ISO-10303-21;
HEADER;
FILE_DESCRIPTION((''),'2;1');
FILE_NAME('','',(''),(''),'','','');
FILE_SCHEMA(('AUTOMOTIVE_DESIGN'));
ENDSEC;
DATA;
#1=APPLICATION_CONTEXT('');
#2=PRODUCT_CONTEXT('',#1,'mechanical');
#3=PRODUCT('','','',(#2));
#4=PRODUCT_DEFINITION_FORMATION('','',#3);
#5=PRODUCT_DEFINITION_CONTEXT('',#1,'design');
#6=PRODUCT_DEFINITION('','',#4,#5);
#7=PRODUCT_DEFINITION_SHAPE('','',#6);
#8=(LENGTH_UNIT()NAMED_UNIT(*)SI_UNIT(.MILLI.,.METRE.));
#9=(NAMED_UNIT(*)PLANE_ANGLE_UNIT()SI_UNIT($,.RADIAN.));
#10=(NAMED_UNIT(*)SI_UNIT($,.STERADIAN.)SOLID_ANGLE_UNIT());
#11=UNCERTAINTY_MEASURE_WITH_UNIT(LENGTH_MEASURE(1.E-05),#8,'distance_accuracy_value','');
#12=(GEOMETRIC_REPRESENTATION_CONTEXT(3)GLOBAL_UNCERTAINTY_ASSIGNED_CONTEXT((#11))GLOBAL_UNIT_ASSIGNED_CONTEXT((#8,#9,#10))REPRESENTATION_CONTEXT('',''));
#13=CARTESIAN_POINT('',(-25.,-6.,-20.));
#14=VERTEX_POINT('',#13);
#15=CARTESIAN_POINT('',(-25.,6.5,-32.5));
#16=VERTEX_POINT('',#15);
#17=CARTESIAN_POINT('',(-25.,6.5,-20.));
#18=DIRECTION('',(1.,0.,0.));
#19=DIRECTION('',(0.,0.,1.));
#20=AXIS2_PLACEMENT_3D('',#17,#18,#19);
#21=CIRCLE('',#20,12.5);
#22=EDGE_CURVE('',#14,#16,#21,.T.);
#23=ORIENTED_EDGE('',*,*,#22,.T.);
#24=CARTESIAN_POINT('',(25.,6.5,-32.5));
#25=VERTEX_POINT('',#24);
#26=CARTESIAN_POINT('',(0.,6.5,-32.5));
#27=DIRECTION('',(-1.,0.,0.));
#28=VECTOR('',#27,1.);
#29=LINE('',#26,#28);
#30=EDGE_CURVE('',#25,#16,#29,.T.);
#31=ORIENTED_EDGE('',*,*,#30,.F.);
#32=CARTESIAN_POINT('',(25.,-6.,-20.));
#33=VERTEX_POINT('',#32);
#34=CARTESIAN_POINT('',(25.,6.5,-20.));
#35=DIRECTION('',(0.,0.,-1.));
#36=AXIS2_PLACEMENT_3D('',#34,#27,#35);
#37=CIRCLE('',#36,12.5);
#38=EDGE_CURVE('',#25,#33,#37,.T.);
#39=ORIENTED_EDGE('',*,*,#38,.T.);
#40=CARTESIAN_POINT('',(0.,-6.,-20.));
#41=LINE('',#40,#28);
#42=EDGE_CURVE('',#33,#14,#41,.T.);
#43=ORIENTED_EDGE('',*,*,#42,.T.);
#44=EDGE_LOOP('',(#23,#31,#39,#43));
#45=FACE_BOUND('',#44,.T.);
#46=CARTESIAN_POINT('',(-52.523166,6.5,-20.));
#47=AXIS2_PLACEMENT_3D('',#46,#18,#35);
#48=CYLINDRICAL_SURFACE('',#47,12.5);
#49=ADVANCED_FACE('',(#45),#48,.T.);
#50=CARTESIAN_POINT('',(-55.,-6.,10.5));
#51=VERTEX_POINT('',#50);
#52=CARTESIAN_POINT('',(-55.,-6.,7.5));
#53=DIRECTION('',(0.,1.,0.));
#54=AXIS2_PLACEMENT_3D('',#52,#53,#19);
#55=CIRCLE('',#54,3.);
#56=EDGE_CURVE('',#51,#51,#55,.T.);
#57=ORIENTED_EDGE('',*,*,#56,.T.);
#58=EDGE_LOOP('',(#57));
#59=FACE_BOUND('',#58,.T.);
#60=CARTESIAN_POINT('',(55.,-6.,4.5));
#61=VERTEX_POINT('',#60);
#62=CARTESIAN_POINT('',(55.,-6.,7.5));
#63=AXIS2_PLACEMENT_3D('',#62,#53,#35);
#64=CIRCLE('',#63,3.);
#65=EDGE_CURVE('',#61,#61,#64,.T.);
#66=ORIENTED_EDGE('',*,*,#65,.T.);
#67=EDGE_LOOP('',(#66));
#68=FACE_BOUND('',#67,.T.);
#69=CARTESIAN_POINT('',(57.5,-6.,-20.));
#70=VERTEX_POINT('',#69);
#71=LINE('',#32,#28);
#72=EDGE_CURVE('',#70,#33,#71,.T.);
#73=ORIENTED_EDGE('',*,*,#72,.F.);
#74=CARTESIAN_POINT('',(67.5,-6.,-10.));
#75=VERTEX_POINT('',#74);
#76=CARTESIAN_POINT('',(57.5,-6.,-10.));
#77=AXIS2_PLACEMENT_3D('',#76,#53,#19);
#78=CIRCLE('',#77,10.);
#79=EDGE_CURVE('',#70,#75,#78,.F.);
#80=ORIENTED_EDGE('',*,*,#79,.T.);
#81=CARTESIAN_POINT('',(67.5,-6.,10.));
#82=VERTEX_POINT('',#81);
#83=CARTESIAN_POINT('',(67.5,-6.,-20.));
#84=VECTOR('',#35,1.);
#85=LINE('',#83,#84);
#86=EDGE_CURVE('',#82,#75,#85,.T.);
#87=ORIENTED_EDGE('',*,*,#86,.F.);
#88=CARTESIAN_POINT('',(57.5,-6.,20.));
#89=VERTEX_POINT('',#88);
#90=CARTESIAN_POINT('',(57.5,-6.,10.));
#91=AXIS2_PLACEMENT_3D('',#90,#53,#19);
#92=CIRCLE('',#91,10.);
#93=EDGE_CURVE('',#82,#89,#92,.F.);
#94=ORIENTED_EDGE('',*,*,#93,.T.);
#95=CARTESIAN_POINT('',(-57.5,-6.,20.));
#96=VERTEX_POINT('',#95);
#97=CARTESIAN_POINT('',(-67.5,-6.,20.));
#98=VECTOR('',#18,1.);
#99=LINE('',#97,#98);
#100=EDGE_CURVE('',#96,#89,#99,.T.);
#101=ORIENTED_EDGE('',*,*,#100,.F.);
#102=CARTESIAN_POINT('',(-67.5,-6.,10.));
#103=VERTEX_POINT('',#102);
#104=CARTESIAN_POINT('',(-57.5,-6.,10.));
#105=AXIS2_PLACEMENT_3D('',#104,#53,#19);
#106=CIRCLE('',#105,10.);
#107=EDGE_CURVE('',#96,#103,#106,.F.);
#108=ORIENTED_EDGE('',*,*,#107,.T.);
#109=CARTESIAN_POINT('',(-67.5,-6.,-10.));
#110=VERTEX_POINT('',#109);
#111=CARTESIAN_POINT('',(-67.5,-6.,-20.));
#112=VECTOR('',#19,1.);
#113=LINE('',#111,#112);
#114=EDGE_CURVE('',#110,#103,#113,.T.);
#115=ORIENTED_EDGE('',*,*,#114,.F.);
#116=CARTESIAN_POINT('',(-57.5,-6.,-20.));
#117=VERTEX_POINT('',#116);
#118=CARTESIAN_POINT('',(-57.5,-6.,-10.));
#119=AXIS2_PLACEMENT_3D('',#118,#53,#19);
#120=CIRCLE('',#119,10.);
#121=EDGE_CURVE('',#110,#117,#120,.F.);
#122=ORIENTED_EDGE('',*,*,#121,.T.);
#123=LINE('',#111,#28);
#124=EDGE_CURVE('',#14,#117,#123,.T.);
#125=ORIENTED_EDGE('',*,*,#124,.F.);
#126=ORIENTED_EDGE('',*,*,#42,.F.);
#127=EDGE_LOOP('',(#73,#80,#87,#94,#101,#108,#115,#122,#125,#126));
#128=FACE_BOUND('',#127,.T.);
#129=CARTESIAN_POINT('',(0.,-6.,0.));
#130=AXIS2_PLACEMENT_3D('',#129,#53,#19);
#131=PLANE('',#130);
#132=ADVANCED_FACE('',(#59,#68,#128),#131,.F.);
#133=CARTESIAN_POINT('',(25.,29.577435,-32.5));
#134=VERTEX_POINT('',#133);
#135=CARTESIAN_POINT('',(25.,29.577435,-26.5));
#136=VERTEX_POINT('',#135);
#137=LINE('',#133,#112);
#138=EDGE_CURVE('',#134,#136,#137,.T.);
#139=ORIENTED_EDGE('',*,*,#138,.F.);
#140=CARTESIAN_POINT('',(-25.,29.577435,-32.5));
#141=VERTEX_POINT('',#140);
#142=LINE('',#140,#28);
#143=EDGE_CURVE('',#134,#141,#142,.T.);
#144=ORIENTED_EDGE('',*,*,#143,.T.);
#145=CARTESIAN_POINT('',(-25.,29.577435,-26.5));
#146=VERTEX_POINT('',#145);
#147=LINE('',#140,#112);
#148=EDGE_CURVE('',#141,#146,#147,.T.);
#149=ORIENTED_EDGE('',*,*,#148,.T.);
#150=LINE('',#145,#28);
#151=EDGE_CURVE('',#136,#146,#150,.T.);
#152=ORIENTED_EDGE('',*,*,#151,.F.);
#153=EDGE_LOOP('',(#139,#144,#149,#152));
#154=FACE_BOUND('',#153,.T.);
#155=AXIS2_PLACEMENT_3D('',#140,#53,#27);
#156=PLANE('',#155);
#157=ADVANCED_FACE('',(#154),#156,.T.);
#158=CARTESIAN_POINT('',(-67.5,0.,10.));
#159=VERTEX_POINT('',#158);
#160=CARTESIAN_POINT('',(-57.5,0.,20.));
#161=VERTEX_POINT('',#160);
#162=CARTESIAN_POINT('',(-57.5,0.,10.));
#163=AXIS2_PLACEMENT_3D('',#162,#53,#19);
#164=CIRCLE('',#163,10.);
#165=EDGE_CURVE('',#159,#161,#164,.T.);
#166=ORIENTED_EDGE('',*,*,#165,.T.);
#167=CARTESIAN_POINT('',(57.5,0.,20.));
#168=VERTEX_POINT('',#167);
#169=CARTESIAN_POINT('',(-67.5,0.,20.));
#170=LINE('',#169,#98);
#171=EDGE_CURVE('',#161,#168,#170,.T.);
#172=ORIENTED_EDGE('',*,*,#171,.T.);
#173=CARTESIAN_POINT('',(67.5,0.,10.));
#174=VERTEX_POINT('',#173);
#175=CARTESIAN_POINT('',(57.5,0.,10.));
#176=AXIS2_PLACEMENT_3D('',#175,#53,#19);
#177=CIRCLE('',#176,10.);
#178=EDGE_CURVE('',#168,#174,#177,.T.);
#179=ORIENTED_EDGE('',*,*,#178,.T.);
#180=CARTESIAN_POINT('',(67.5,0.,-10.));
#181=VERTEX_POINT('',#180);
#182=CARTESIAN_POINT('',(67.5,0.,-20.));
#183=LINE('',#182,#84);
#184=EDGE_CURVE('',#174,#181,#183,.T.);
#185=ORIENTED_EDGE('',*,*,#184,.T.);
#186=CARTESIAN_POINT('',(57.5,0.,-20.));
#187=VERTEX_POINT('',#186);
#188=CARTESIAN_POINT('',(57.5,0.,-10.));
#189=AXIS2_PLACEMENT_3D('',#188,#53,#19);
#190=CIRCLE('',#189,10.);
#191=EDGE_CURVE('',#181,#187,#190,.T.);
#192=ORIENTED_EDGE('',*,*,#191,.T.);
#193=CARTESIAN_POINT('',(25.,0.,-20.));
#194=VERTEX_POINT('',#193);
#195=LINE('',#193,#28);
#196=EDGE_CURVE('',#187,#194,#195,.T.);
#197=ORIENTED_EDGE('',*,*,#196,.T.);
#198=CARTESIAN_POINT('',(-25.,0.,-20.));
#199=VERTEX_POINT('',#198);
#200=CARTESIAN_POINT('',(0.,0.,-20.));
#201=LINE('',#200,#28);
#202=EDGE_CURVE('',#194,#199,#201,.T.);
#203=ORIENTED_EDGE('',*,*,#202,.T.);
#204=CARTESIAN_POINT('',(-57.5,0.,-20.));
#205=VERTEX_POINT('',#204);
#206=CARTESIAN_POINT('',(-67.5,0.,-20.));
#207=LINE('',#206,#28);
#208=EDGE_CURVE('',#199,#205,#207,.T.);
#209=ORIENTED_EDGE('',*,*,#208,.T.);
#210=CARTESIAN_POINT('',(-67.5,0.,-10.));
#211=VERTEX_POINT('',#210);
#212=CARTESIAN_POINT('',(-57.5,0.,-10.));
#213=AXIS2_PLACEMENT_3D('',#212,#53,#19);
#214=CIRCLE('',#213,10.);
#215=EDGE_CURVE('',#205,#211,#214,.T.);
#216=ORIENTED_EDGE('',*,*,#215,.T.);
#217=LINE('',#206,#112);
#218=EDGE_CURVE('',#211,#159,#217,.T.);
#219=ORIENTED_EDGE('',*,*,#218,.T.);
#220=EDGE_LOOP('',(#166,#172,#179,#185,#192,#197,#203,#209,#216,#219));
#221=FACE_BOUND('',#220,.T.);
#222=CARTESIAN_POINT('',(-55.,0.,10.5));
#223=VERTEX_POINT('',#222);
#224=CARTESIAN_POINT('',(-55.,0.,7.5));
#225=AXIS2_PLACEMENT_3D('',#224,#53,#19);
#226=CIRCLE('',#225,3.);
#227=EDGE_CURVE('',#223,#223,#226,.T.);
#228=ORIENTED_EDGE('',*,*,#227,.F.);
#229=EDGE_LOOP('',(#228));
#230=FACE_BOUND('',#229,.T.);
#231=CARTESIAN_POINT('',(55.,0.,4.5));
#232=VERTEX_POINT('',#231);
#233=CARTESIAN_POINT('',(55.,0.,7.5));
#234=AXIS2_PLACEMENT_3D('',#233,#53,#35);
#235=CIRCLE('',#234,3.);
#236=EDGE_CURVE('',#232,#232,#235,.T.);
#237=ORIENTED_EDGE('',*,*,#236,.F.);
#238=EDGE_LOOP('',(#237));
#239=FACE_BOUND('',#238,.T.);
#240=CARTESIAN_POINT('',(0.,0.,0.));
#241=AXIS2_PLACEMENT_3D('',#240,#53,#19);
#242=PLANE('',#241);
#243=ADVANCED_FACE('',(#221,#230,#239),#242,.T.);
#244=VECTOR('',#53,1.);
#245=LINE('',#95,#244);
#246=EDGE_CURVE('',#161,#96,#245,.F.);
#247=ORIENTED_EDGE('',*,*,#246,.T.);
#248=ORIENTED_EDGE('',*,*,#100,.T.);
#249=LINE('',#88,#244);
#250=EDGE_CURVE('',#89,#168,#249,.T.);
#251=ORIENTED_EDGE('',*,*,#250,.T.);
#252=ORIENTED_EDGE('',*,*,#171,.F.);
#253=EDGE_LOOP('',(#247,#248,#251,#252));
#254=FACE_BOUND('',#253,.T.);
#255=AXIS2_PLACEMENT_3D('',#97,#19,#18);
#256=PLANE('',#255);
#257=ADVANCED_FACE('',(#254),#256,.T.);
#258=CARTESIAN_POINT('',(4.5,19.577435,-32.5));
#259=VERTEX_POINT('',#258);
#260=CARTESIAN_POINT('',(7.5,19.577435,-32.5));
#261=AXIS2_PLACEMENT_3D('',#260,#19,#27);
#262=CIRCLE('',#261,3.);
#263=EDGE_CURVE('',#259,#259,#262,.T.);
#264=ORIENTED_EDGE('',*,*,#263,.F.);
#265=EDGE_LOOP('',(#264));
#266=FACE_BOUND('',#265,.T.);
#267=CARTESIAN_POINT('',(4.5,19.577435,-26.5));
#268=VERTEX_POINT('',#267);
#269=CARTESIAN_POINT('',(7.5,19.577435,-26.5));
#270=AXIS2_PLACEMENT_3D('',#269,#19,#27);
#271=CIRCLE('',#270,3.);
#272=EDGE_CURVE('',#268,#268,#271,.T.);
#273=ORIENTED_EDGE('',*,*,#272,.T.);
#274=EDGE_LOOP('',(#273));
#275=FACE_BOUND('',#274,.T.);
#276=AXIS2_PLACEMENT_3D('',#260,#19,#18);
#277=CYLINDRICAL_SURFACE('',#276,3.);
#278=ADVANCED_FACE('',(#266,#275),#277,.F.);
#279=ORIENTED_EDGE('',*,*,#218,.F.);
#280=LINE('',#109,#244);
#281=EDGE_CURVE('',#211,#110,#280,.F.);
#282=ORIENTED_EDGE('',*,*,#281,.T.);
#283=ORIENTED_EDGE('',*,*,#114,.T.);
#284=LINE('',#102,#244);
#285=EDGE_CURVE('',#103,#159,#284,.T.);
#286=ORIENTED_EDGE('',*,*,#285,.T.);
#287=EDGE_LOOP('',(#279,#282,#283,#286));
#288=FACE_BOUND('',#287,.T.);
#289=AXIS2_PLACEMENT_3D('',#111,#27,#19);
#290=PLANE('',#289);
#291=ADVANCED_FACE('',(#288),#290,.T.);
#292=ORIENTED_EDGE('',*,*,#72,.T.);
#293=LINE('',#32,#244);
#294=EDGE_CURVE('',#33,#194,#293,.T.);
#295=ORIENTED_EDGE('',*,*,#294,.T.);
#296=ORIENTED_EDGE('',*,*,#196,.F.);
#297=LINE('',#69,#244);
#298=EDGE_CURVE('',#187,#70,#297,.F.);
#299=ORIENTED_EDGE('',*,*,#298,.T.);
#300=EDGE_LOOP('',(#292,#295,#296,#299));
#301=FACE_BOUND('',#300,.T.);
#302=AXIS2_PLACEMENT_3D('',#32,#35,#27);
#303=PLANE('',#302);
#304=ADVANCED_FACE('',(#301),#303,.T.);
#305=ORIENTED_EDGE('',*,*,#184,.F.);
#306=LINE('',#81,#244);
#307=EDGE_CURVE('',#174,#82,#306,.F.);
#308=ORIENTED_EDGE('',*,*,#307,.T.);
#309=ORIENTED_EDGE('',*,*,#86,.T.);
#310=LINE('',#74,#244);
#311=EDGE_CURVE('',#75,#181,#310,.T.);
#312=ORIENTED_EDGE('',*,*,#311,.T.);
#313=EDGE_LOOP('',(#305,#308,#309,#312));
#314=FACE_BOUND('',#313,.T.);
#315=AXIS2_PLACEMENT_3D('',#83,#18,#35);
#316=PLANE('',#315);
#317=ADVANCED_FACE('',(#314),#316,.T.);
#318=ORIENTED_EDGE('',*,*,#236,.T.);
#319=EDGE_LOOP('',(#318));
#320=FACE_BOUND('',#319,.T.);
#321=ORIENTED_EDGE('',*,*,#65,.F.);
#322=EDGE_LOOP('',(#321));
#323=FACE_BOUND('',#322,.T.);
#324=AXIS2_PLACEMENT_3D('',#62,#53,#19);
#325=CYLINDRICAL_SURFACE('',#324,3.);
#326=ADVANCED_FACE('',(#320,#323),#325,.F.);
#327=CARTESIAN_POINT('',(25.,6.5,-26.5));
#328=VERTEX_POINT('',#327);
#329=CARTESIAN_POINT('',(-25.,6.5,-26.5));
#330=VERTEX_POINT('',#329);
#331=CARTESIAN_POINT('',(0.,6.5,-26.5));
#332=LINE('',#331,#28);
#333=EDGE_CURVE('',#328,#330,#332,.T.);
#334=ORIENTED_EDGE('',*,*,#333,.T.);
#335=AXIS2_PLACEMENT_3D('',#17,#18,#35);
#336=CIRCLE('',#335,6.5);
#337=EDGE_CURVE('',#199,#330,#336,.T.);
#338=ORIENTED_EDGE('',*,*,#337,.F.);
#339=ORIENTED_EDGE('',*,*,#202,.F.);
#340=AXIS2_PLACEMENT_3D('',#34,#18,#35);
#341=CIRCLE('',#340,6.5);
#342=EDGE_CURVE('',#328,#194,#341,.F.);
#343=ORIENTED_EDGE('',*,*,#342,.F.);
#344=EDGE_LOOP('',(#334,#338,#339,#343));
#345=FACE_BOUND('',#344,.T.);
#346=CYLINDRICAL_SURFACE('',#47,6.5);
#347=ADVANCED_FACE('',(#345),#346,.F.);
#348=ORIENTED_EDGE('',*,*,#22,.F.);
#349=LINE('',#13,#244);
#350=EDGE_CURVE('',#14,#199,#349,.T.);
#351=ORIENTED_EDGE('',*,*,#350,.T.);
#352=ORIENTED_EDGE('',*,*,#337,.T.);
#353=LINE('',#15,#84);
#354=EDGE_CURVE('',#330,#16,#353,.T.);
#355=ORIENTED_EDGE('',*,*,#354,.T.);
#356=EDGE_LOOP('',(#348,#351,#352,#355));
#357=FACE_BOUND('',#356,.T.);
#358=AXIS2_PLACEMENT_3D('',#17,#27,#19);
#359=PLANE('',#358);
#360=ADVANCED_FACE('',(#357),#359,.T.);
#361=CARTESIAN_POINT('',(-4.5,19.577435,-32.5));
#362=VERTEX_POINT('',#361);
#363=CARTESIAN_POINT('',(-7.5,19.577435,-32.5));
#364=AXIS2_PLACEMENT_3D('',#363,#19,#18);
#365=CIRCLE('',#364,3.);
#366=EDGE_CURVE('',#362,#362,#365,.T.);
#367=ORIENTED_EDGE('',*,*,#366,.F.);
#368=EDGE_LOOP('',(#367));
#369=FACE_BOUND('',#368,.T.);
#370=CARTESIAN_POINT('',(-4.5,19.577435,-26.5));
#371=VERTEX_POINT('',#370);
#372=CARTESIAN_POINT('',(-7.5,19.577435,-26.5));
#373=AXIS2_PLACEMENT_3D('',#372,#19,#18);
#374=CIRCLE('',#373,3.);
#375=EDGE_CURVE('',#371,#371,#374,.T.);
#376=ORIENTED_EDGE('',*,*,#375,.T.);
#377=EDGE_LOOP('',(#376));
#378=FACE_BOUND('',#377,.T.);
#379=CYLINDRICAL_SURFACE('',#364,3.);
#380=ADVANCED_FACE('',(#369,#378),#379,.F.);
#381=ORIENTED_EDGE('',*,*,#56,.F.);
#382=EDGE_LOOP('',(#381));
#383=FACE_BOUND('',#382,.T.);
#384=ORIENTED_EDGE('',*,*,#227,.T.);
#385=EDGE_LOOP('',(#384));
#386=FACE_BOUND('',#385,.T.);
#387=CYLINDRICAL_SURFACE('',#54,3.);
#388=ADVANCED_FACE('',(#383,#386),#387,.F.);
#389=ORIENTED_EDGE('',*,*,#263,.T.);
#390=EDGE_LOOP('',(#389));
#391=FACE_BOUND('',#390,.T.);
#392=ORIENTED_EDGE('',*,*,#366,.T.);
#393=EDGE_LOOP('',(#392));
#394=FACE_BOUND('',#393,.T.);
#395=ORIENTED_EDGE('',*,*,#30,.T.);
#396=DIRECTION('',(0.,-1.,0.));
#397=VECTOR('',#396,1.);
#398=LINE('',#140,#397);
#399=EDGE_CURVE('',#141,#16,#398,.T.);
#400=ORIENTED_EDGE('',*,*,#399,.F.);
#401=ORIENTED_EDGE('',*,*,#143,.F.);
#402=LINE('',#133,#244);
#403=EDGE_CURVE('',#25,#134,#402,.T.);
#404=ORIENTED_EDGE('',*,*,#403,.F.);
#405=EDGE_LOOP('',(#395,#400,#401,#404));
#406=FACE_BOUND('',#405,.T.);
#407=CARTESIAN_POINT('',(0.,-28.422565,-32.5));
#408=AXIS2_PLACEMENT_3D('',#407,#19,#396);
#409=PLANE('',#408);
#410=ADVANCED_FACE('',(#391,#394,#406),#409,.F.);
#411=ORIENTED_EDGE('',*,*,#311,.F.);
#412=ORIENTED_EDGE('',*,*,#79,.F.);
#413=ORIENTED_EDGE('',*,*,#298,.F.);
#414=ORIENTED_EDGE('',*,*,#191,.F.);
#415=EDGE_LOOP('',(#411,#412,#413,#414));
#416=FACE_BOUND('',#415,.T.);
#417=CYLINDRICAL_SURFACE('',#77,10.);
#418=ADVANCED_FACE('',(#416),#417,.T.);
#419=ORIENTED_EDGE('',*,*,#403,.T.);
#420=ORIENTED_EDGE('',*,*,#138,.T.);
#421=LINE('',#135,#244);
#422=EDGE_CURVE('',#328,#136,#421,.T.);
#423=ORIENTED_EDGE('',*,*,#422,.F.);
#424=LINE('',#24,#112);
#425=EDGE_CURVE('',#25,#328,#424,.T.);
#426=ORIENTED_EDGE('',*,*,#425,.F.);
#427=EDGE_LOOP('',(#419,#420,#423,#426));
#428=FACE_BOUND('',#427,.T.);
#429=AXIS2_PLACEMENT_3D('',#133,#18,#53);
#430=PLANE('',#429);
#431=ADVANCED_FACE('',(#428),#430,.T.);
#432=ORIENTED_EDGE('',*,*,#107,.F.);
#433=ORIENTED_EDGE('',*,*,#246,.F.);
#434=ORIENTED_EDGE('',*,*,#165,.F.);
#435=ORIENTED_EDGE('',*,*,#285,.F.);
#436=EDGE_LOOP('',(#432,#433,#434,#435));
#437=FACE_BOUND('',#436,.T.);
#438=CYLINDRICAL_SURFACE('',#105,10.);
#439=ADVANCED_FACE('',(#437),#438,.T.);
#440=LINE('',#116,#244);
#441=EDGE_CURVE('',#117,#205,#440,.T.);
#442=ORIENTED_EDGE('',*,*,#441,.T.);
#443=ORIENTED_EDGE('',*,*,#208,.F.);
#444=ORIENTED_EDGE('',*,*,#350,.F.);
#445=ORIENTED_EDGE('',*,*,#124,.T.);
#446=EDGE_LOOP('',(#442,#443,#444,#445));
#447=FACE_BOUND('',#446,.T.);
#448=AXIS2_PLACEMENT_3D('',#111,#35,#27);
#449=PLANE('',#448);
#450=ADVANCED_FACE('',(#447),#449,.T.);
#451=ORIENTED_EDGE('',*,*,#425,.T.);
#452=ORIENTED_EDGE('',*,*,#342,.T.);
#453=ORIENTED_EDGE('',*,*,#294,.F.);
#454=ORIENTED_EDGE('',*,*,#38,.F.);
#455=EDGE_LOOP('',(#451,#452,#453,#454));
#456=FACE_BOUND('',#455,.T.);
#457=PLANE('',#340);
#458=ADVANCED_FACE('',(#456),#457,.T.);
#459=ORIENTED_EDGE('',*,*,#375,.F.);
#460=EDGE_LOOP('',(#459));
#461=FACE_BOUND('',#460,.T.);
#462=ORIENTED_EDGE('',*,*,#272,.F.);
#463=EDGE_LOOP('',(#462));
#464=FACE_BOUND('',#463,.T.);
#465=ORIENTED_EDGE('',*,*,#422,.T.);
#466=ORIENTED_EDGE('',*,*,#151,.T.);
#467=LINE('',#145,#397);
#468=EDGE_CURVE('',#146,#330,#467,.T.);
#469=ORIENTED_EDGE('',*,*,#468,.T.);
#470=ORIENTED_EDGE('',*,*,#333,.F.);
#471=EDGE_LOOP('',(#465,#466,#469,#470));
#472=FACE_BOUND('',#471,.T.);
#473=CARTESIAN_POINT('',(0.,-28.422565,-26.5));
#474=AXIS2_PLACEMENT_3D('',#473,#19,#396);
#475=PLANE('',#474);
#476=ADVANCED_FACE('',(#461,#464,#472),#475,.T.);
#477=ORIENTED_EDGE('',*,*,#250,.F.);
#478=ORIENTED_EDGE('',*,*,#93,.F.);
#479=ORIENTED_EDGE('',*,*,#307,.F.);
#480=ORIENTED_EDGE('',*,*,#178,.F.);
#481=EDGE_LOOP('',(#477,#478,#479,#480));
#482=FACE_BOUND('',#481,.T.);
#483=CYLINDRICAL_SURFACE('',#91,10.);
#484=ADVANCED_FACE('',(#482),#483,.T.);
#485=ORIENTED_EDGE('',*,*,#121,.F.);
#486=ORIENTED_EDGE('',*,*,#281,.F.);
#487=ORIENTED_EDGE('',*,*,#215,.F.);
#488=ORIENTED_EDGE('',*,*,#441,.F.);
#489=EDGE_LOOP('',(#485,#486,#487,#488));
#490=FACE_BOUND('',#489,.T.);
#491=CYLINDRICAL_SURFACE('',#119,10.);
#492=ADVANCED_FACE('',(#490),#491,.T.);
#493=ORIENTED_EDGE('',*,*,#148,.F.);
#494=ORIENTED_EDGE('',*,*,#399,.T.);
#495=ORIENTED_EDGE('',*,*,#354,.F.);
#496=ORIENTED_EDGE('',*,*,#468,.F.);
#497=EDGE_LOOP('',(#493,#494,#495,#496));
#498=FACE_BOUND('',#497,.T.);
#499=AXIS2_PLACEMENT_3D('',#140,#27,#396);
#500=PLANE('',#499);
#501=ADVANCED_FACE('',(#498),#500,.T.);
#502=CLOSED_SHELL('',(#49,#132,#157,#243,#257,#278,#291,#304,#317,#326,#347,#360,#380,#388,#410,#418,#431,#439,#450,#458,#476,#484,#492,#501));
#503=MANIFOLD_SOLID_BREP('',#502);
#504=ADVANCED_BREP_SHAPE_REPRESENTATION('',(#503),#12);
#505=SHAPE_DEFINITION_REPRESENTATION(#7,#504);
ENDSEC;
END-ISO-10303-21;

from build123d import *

# Parameters (mm, degrees)
BASE_FLANGE1_DEPTH     = 6
SKETCHED_START         = -25
SKETCHED_BEND1_DEPTH   = 50
SKETCHED_BEND1_2_DEPTH = 50
SKETCH8_R              = 3
CUT_EXTRUDE1_DEPTH     = 81.54392997
FILLET1_R              = 10
SKETCH10_R             = 3
CUT_EXTRUDE2_DEPTH     = 88.139684731


# Read off the part's stored shape, not the designer's step: Sketched Bend1
# Sheet-metal steps are written as plain solids
with BuildPart() as part:
    # Sketch1 → Base-Flange1 (new body)
    with BuildSketch(Plane(origin=(0, 0, 0), x_dir=(1, 0, 0), z_dir=(0, 1, 0))):
        Polygon((25, 20), (67.5, 20), (67.5, -20), (-67.5, -20), (-67.5, 20), (-25, 20), (-25, 58), (25, 58), align=None)
    extrude(amount=-BASE_FLANGE1_DEPTH)

    # Sketched Bend1 outline → Sketched Bend1 (cut)
    with BuildSketch(Plane.YZ.offset(SKETCHED_START)):
        with BuildLine():
            Line((0, -58), (0, -30.677078252))
            ThreePointArc((0, -30.677078252), (-4.397247359, -26.123724357), (-6, -20))
            Line((-6, -20), (-6, -58))
            Line((-6, -58), (0, -58))
        make_face()
    extrude(amount=SKETCHED_BEND1_DEPTH, mode=Mode.SUBTRACT)

    # Sketched Bend1 2 outline → Sketched Bend1 2 (add)
    with BuildSketch(Plane.YZ.offset(SKETCHED_START)):
        with BuildLine():
            Line((6.5, -32.5), (29.577434895, -32.5))
            Line((29.577434895, -32.5), (29.577434895, -26.5))
            Line((29.577434895, -26.5), (6.5, -26.5))
            ThreePointArc((6.5, -26.5), (1.903805922, -24.596194078), (0, -20))
            Line((0, -20), (0, -30.677078252))
            ThreePointArc((0, -30.677078252), (3.124609515, -32.035644523), (6.5, -32.5))
        make_face()
    extrude(amount=SKETCHED_BEND1_2_DEPTH)

    # Sketch8 → Cut-Extrude1 (cut, through all)
    with BuildSketch(Plane(origin=(0, 0, 0), x_dir=(1, 0, 0), z_dir=(0, 1, 0))):
        with Locations(Location((-55, -7.5, 0), (0, 0, 270))):
            Circle(SKETCH8_R)
        with Locations(Location((55, -7.5, 0), (0, 0, 90))):
            Circle(SKETCH8_R)
    extrude(amount=-CUT_EXTRUDE1_DEPTH, mode=Mode.SUBTRACT)

    # Fillet1
    fillet1_edges = [part.edges().sort_by_distance(p)[0] for p in [
        (-67.5, -3, 20),
        (67.5, -3, 20),
        (67.5, -3, -20),
        (-67.5, -3, -20),
    ]]
    fillet(fillet1_edges, radius=FILLET1_R)

    # Sketch10 → Cut-Extrude2 (cut, through all)
    with BuildSketch(Plane.XY.offset(-26.5)):
        with Locations((-7.5, 19.577434895)):
            Circle(SKETCH10_R)
        with Locations(Location((7.5, 19.577434895, 0), (0, 0, 180))):
            Circle(SKETCH10_R)
    extrude(amount=-CUT_EXTRUDE2_DEPTH, mode=Mode.SUBTRACT)


solid = part.part
